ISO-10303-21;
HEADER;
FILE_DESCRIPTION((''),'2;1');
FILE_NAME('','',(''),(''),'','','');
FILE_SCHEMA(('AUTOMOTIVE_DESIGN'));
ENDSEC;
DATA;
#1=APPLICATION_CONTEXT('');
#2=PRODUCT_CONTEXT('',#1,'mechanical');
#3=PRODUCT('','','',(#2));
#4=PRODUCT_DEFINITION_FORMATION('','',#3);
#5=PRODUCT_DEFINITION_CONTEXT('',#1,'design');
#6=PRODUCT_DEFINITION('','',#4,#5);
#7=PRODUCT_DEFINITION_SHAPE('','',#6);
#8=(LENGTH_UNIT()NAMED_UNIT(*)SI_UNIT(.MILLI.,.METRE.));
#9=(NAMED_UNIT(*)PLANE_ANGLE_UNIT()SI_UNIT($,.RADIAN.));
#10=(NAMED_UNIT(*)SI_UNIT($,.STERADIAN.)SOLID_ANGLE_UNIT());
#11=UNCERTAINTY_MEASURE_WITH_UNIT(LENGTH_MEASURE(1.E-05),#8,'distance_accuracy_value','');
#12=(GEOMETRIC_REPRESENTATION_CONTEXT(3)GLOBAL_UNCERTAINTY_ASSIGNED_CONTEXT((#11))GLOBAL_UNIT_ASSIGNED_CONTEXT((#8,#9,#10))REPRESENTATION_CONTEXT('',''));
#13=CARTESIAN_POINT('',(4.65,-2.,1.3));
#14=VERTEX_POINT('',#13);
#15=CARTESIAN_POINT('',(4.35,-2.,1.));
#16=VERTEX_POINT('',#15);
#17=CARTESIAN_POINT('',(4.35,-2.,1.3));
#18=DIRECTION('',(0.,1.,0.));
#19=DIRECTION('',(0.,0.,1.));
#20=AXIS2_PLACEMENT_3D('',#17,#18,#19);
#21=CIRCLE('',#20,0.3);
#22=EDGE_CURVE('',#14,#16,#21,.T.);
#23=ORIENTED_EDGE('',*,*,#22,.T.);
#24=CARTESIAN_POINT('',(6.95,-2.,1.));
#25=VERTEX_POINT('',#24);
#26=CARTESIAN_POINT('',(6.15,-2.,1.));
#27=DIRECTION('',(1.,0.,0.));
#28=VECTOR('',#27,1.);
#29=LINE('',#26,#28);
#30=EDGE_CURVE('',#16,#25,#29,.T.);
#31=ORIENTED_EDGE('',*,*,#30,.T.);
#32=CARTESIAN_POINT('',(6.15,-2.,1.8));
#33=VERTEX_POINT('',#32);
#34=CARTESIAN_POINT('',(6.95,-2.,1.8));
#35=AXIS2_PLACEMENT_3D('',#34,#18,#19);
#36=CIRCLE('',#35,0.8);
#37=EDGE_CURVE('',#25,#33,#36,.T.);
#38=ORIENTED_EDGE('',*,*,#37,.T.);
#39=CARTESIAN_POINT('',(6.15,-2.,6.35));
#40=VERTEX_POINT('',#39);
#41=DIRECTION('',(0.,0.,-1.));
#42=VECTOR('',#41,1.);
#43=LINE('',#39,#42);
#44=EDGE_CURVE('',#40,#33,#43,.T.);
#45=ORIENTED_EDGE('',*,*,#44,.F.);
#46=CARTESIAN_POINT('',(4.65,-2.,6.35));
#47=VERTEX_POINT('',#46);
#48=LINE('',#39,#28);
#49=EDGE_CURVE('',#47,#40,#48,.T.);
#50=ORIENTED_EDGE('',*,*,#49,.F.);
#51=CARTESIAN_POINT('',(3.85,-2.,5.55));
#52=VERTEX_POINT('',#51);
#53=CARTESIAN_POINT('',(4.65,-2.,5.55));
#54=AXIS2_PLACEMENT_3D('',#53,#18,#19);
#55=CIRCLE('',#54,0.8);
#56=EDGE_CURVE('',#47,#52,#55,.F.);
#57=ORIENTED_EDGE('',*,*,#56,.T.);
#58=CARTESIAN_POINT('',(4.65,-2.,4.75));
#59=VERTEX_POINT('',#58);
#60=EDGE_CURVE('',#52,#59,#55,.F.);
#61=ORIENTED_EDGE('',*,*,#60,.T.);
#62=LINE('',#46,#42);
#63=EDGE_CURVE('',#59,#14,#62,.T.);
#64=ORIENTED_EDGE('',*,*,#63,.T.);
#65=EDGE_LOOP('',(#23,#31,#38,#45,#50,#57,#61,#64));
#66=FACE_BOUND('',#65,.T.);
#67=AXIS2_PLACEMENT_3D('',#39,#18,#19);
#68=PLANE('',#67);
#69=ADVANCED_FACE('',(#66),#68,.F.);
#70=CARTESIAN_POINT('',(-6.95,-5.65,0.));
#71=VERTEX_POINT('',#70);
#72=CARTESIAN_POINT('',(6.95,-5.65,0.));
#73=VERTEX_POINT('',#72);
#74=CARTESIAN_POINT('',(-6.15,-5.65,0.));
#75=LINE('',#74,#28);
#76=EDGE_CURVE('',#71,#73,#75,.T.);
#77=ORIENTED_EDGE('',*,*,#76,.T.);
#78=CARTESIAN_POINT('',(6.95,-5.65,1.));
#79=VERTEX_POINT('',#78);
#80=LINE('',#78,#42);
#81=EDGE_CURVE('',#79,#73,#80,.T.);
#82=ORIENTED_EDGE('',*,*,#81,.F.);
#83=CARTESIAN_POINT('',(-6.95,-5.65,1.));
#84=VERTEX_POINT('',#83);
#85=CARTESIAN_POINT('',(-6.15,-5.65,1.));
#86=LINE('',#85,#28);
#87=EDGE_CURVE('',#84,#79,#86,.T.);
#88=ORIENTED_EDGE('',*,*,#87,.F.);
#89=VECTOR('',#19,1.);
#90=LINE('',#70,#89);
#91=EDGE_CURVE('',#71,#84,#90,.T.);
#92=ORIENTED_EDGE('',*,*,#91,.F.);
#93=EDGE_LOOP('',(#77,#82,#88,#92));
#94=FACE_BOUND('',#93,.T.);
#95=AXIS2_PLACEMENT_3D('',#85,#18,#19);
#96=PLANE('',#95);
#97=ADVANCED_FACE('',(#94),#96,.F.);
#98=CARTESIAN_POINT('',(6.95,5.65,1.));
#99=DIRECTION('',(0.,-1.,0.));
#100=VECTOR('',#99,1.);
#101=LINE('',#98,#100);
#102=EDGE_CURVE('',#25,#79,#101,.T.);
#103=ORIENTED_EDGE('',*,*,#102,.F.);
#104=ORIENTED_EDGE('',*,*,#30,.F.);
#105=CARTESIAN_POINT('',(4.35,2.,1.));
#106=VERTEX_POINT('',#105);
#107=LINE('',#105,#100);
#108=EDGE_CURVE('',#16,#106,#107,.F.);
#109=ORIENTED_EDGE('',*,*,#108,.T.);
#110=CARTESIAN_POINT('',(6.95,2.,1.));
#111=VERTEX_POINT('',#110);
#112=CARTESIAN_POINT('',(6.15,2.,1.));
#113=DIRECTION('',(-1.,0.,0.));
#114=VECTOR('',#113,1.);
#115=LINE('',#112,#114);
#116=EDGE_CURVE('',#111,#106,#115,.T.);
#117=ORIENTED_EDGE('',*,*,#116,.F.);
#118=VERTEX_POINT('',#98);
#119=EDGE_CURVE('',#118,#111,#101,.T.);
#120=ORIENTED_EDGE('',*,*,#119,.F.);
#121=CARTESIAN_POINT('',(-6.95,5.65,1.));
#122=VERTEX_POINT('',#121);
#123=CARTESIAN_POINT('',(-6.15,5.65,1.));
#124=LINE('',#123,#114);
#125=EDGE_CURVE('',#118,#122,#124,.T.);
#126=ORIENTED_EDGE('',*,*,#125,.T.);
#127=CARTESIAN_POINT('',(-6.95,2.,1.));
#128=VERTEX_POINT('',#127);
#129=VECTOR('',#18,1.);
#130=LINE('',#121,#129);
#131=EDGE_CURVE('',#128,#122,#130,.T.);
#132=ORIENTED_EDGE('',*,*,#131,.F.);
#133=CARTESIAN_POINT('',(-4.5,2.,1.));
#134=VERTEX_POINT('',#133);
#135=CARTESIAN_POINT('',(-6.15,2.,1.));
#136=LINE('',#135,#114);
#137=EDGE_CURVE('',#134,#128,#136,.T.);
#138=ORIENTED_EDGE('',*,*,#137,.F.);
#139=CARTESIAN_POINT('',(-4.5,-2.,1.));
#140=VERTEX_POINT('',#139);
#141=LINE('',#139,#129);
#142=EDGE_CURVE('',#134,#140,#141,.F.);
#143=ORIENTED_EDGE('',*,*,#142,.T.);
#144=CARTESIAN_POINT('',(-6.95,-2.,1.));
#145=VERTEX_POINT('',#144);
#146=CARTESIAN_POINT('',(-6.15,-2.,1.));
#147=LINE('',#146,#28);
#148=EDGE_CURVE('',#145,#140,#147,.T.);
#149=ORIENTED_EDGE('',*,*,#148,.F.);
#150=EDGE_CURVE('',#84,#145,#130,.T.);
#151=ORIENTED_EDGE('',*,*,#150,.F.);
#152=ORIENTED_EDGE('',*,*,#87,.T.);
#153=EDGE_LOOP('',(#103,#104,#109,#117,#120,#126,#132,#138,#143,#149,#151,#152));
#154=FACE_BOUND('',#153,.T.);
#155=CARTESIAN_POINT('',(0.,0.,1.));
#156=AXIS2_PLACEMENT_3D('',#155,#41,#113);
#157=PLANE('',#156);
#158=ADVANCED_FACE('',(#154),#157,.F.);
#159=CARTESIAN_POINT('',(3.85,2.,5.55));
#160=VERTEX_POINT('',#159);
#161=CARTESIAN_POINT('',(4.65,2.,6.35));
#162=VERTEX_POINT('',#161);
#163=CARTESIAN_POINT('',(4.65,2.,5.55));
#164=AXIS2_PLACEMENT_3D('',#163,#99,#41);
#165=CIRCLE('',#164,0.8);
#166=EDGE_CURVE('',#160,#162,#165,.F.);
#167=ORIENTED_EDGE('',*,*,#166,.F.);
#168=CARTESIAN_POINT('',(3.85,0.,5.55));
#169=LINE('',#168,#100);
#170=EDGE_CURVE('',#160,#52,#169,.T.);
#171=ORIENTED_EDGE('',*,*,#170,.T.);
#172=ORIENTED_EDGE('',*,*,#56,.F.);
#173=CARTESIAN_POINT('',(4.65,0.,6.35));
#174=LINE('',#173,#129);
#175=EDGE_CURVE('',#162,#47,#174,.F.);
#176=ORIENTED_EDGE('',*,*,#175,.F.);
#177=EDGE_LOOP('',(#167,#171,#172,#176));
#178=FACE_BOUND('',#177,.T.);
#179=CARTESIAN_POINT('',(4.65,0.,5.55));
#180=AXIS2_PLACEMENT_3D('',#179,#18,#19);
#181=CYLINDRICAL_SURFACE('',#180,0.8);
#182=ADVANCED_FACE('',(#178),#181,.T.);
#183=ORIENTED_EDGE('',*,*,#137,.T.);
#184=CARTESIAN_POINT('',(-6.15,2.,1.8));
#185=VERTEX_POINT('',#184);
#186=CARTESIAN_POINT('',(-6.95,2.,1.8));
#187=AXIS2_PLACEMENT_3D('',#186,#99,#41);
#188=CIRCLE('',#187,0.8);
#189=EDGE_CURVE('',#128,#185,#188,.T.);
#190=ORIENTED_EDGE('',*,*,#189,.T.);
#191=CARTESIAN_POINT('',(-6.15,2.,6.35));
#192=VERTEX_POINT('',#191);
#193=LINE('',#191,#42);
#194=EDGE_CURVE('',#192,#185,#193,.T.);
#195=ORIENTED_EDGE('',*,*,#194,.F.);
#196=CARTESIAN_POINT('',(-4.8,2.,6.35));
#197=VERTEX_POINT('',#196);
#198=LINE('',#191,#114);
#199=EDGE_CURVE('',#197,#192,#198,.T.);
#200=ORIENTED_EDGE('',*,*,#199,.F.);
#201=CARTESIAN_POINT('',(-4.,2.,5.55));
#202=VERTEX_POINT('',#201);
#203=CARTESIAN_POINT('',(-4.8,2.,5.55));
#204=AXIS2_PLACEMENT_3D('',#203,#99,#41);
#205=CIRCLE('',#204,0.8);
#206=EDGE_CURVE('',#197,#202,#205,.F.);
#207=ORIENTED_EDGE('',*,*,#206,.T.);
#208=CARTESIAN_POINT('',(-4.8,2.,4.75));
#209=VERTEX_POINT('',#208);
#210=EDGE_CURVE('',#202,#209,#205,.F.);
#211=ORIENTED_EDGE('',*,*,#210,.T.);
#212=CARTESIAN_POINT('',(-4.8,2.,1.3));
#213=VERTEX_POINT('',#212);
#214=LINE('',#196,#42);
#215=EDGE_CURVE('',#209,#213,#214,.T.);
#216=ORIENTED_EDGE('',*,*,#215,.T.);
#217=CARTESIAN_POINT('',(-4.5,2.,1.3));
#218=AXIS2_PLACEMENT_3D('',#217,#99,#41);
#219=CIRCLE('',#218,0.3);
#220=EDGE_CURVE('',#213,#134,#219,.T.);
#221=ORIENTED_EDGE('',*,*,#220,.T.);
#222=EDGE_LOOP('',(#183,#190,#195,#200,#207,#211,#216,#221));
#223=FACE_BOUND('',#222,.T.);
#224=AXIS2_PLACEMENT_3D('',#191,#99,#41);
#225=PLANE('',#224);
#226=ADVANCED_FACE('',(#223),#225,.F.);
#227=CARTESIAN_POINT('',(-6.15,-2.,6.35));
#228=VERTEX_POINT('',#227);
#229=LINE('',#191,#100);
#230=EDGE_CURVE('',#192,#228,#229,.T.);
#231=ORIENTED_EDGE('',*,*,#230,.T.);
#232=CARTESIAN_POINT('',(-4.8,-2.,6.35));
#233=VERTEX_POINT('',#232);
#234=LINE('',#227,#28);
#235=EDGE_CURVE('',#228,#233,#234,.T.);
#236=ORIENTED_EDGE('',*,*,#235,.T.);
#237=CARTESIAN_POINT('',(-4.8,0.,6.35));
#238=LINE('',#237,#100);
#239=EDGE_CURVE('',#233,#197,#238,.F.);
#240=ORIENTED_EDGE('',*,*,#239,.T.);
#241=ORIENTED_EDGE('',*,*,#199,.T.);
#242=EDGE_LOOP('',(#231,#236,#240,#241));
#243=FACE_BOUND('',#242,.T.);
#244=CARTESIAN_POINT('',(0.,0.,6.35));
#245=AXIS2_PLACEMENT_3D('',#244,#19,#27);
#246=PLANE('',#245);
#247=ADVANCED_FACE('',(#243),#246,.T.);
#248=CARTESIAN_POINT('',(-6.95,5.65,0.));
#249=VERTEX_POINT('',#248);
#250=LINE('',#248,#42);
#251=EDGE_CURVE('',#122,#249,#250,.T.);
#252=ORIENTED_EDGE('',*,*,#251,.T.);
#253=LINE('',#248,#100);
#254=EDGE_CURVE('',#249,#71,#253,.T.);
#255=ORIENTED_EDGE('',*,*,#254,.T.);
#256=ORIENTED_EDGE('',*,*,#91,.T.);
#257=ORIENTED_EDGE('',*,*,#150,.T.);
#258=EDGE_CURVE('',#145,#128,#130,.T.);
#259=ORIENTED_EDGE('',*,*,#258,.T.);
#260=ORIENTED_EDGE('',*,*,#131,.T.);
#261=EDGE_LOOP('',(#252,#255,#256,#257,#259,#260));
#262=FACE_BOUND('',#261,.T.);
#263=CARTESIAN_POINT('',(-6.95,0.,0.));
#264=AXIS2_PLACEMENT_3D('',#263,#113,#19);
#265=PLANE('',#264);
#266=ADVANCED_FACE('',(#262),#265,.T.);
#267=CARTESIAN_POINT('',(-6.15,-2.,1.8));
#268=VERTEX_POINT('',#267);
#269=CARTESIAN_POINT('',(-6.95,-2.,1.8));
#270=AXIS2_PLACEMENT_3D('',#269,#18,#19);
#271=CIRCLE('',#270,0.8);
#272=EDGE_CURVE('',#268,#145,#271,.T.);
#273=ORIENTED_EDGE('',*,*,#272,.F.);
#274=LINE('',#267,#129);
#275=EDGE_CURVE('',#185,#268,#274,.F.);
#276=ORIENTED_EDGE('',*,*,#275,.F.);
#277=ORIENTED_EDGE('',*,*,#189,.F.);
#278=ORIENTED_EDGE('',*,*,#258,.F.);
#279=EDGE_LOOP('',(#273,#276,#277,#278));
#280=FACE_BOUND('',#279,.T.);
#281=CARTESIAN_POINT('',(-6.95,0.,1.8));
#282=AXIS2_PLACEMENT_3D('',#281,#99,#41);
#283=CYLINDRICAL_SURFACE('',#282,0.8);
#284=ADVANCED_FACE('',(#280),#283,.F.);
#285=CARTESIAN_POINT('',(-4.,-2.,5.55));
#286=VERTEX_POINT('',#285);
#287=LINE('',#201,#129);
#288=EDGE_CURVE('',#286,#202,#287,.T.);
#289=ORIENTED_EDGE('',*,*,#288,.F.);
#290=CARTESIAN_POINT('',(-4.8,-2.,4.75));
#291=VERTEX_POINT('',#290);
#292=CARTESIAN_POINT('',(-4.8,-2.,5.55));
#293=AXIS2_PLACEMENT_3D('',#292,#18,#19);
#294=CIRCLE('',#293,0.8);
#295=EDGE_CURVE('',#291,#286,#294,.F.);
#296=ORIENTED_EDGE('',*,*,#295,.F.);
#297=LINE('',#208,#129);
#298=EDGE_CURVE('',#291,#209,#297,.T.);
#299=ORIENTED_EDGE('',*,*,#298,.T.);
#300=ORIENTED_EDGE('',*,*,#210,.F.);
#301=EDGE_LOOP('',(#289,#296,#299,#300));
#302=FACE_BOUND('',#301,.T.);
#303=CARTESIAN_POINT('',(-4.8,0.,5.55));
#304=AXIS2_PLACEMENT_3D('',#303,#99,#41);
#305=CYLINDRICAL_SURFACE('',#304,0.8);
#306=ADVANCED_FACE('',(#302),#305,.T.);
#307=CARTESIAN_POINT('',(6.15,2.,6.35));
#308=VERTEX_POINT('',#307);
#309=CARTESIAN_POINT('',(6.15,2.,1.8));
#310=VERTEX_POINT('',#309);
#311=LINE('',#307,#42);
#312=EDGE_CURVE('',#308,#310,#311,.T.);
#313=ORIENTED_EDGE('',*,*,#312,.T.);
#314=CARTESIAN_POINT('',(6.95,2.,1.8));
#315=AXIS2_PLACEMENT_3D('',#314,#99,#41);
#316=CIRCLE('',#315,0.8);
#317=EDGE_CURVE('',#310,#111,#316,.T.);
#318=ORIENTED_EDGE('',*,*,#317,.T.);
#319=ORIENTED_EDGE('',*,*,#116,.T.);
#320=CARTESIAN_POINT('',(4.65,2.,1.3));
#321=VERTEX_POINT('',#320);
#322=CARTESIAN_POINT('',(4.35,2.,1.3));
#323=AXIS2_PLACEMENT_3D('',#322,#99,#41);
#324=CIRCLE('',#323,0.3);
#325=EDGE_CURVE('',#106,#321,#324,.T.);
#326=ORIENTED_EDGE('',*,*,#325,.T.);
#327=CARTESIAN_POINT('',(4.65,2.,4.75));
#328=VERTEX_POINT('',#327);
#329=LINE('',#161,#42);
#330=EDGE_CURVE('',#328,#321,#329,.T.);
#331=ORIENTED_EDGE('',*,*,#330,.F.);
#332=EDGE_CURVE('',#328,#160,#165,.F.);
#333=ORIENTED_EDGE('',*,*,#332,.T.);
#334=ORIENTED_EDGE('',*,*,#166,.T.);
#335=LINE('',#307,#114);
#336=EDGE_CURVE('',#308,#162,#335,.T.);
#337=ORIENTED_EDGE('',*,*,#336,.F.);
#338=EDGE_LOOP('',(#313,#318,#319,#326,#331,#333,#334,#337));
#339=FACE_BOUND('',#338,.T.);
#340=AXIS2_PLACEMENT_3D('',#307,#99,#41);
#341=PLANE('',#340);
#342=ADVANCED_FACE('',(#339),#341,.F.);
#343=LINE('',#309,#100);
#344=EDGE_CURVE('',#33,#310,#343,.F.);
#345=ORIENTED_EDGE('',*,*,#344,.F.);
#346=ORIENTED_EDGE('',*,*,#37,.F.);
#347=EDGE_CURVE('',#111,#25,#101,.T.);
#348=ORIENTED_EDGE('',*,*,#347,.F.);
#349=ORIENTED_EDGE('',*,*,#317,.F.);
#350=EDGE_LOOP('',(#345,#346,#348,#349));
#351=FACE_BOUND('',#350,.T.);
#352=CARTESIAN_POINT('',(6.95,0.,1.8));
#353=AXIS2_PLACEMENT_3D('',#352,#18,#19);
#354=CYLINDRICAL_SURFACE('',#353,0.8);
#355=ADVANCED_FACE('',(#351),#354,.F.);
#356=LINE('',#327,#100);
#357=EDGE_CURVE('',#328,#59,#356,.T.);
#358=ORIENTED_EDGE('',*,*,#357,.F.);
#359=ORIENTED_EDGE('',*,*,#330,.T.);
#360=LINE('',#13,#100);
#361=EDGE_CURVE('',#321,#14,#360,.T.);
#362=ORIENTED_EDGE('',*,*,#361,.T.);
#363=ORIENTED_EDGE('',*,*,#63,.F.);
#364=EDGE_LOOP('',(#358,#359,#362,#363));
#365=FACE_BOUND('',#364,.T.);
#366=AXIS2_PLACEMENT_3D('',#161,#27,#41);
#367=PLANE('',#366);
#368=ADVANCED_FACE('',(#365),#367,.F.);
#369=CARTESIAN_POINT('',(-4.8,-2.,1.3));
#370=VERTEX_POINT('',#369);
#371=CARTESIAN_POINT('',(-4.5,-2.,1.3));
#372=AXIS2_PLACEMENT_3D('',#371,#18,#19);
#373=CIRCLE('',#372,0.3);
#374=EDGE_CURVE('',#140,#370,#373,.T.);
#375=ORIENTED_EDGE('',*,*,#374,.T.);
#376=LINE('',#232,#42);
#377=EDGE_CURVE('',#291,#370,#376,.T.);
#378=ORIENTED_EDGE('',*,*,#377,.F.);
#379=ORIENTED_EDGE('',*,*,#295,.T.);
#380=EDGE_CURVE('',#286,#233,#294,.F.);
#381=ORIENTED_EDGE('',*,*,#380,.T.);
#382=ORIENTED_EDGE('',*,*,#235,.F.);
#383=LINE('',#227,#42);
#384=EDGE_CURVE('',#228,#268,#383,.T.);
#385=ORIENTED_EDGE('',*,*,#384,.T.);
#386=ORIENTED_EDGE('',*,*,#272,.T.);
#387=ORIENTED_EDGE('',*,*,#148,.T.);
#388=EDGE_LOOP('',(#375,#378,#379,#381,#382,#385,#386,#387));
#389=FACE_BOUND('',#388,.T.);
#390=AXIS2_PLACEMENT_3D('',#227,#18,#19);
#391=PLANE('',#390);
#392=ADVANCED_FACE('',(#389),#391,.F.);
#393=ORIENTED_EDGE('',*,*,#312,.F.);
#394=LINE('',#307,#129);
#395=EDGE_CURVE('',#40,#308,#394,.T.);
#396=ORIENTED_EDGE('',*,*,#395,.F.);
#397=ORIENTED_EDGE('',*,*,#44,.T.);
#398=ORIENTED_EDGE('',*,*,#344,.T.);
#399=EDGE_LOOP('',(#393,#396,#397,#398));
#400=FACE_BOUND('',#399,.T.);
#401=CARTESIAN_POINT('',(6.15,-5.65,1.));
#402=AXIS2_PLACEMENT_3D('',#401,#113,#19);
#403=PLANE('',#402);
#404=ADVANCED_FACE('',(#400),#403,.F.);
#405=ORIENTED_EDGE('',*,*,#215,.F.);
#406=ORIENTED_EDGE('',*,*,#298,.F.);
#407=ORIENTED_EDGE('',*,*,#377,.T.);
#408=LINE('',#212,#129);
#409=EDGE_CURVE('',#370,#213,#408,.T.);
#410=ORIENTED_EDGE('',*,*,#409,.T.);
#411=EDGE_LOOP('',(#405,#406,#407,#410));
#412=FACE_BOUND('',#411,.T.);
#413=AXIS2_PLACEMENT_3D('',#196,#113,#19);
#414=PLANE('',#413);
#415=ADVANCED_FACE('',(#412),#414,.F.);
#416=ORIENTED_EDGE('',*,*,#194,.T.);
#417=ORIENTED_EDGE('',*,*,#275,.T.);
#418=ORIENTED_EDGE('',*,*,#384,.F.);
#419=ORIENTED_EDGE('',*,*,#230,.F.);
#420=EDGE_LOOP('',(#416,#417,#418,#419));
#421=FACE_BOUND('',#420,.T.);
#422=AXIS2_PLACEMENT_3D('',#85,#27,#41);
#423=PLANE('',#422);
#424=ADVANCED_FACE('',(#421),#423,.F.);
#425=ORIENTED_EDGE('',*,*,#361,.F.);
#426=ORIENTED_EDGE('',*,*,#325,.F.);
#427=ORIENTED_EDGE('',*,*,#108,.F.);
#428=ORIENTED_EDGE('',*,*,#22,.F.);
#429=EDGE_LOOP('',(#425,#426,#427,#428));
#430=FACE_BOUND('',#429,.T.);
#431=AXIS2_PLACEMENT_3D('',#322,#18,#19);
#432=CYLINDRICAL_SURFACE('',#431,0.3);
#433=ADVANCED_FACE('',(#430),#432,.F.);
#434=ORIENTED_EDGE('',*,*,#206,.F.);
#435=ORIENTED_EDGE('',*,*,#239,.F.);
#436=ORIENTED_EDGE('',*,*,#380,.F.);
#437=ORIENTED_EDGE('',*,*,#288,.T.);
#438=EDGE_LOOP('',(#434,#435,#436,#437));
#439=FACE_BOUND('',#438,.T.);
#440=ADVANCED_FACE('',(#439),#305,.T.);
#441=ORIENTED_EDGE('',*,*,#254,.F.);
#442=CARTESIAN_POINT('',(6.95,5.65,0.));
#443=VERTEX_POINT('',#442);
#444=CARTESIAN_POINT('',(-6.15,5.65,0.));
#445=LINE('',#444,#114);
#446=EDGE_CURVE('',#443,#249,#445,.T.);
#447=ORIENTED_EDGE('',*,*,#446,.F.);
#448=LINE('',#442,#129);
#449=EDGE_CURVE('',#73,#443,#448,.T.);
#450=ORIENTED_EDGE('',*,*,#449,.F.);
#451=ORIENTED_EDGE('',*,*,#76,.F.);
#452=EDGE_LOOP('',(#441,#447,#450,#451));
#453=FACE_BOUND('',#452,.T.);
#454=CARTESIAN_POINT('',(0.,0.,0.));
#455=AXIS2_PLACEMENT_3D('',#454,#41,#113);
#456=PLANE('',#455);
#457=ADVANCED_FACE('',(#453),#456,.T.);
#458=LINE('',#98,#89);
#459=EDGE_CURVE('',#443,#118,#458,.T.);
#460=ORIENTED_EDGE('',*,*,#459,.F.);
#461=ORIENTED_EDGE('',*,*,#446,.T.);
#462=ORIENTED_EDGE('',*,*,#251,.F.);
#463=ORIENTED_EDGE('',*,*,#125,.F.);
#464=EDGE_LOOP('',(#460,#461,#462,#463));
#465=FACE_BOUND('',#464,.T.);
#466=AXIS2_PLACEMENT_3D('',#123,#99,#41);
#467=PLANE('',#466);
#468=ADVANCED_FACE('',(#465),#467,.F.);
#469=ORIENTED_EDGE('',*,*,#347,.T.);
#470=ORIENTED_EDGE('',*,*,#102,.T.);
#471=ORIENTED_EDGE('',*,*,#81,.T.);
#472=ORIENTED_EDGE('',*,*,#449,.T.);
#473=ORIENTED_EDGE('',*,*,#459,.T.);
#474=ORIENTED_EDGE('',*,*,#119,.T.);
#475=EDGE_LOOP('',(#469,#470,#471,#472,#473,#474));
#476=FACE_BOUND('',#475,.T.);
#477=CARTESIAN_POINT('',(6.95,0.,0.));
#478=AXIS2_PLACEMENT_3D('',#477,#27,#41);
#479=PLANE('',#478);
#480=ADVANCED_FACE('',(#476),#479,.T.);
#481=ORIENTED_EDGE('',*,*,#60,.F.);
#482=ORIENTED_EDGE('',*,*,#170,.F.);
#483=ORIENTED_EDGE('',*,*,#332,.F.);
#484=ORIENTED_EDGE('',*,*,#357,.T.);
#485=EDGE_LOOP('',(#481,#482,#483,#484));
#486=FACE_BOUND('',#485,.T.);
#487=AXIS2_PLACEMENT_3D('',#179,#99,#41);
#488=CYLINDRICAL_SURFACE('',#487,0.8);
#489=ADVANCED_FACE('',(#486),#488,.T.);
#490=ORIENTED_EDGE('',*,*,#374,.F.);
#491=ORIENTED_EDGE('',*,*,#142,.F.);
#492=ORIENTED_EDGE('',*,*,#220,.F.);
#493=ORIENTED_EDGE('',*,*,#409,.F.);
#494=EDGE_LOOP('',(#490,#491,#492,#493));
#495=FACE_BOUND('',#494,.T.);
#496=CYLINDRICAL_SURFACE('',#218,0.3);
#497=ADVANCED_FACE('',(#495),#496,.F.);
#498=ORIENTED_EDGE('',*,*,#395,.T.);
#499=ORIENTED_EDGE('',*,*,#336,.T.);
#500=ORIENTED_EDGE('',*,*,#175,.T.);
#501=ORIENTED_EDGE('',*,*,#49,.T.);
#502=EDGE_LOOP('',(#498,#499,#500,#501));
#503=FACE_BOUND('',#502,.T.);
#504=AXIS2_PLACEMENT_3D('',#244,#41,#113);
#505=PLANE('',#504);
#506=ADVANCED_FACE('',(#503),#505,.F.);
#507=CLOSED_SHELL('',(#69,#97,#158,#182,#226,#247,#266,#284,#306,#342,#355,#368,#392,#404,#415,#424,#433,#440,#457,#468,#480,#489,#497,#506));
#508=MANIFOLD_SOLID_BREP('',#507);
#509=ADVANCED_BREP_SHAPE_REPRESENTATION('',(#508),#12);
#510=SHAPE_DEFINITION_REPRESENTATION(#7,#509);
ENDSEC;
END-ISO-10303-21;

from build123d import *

# Parameters (mm, degrees)
SKETCH_1_W      = 12.3
SKETCH_1_H      = 11.3
EXTRUDE_1_DEPTH = 1
SKETCH_2_W      = 1.35
SKETCH_2_H      = 4
SKETCH_2_W_2    = 1.5
EXTRUDE_2_DEPTH = 5.35
SKETCH_3_W      = 1.6
SKETCH_3_H      = 4
EXTRUDE_3_DEPTH = 0.8
SKETCH_4_W      = 1.6
SKETCH_4_H      = 4
EXTRUDE_4_DEPTH = 0.8
FILLET_1_R      = 0.8
FILLET_2_R      = 0.3
SKETCH_5_W      = 1
SKETCH_5_H      = 11.3
EXTRUDE_5_DEPTH = 0.8
SKETCH_6_W      = 1
SKETCH_6_H      = 11.3
EXTRUDE_6_DEPTH = 0.8
FILLET_3_R      = 0.8


with BuildPart() as part:
    # 스케치1 → 보스-돌출1 (new body)
    with BuildSketch(Plane.XY):
        Rectangle(SKETCH_1_W, SKETCH_1_H)
    extrude(amount=EXTRUDE_1_DEPTH)

    # 스케치2 → 보스-돌출2 (add)
    with BuildSketch(Plane.XY.offset(1)):
        with Locations((-5.475, 0)):
            Rectangle(SKETCH_2_W, SKETCH_2_H)
        with Locations((5.4, 0)):
            Rectangle(SKETCH_2_W_2, SKETCH_2_H)
    extrude(amount=EXTRUDE_2_DEPTH)

    # 스케치3 → 보스-돌출3 (add)
    with BuildSketch(Plane(origin=(-4.8, 0, 0), x_dir=(0, 0, -1), z_dir=(1, 0, 0))):
        with Locations((-5.55, 0)):
            Rectangle(SKETCH_3_W, SKETCH_3_H)
    extrude(amount=EXTRUDE_3_DEPTH)

    # 스케치4 → 보스-돌출4 (add)
    with BuildSketch(Plane.ZY.offset(-4.65)):
        with Locations((5.55, 0)):
            Rectangle(SKETCH_4_W, SKETCH_4_H)
    extrude(amount=EXTRUDE_4_DEPTH)

    # 필렛1
    fillet_1_edges = [part.edges().sort_by_distance(p)[0] for p in [
        (3.85, 0, 6.35),
        (3.85, 0, 4.75),
        (-4, 0, 6.35),
        (-4, 0, 4.75),
    ]]
    fillet(fillet_1_edges, radius=FILLET_1_R - 0.0001)  # a hair under: the kernel refuses the full size

    # 필렛2
    fillet_2_edges = [part.edges().sort_by_distance(p)[0] for p in [
        (-4.8, 0, 1),
        (4.65, 0, 1),
    ]]
    fillet(fillet_2_edges, radius=FILLET_2_R)

    # 스케치5 → 보스-돌출5 (add)
    with BuildSketch(Plane.ZY.offset(6.15)):
        with Locations((0.5, 0)):
            Rectangle(SKETCH_5_W, SKETCH_5_H)
    extrude(amount=EXTRUDE_5_DEPTH)

    # 스케치6 → 보스-돌출6 (add)
    with BuildSketch(Plane(origin=(6.15, 0, 0), x_dir=(0, 0, -1), z_dir=(1, 0, 0))):
        with Locations((-0.5, 0)):
            Rectangle(SKETCH_6_W, SKETCH_6_H)
    extrude(amount=EXTRUDE_6_DEPTH)

    # 필렛3
    fillet_3_edges = [part.edges().sort_by_distance(p)[0] for p in [
        (-6.15, 0, 1),
        (6.15, 0, 1),
    ]]
    fillet(fillet_3_edges, radius=FILLET_3_R - 0.0001)  # a hair under: the kernel refuses the full size


solid = part.part
